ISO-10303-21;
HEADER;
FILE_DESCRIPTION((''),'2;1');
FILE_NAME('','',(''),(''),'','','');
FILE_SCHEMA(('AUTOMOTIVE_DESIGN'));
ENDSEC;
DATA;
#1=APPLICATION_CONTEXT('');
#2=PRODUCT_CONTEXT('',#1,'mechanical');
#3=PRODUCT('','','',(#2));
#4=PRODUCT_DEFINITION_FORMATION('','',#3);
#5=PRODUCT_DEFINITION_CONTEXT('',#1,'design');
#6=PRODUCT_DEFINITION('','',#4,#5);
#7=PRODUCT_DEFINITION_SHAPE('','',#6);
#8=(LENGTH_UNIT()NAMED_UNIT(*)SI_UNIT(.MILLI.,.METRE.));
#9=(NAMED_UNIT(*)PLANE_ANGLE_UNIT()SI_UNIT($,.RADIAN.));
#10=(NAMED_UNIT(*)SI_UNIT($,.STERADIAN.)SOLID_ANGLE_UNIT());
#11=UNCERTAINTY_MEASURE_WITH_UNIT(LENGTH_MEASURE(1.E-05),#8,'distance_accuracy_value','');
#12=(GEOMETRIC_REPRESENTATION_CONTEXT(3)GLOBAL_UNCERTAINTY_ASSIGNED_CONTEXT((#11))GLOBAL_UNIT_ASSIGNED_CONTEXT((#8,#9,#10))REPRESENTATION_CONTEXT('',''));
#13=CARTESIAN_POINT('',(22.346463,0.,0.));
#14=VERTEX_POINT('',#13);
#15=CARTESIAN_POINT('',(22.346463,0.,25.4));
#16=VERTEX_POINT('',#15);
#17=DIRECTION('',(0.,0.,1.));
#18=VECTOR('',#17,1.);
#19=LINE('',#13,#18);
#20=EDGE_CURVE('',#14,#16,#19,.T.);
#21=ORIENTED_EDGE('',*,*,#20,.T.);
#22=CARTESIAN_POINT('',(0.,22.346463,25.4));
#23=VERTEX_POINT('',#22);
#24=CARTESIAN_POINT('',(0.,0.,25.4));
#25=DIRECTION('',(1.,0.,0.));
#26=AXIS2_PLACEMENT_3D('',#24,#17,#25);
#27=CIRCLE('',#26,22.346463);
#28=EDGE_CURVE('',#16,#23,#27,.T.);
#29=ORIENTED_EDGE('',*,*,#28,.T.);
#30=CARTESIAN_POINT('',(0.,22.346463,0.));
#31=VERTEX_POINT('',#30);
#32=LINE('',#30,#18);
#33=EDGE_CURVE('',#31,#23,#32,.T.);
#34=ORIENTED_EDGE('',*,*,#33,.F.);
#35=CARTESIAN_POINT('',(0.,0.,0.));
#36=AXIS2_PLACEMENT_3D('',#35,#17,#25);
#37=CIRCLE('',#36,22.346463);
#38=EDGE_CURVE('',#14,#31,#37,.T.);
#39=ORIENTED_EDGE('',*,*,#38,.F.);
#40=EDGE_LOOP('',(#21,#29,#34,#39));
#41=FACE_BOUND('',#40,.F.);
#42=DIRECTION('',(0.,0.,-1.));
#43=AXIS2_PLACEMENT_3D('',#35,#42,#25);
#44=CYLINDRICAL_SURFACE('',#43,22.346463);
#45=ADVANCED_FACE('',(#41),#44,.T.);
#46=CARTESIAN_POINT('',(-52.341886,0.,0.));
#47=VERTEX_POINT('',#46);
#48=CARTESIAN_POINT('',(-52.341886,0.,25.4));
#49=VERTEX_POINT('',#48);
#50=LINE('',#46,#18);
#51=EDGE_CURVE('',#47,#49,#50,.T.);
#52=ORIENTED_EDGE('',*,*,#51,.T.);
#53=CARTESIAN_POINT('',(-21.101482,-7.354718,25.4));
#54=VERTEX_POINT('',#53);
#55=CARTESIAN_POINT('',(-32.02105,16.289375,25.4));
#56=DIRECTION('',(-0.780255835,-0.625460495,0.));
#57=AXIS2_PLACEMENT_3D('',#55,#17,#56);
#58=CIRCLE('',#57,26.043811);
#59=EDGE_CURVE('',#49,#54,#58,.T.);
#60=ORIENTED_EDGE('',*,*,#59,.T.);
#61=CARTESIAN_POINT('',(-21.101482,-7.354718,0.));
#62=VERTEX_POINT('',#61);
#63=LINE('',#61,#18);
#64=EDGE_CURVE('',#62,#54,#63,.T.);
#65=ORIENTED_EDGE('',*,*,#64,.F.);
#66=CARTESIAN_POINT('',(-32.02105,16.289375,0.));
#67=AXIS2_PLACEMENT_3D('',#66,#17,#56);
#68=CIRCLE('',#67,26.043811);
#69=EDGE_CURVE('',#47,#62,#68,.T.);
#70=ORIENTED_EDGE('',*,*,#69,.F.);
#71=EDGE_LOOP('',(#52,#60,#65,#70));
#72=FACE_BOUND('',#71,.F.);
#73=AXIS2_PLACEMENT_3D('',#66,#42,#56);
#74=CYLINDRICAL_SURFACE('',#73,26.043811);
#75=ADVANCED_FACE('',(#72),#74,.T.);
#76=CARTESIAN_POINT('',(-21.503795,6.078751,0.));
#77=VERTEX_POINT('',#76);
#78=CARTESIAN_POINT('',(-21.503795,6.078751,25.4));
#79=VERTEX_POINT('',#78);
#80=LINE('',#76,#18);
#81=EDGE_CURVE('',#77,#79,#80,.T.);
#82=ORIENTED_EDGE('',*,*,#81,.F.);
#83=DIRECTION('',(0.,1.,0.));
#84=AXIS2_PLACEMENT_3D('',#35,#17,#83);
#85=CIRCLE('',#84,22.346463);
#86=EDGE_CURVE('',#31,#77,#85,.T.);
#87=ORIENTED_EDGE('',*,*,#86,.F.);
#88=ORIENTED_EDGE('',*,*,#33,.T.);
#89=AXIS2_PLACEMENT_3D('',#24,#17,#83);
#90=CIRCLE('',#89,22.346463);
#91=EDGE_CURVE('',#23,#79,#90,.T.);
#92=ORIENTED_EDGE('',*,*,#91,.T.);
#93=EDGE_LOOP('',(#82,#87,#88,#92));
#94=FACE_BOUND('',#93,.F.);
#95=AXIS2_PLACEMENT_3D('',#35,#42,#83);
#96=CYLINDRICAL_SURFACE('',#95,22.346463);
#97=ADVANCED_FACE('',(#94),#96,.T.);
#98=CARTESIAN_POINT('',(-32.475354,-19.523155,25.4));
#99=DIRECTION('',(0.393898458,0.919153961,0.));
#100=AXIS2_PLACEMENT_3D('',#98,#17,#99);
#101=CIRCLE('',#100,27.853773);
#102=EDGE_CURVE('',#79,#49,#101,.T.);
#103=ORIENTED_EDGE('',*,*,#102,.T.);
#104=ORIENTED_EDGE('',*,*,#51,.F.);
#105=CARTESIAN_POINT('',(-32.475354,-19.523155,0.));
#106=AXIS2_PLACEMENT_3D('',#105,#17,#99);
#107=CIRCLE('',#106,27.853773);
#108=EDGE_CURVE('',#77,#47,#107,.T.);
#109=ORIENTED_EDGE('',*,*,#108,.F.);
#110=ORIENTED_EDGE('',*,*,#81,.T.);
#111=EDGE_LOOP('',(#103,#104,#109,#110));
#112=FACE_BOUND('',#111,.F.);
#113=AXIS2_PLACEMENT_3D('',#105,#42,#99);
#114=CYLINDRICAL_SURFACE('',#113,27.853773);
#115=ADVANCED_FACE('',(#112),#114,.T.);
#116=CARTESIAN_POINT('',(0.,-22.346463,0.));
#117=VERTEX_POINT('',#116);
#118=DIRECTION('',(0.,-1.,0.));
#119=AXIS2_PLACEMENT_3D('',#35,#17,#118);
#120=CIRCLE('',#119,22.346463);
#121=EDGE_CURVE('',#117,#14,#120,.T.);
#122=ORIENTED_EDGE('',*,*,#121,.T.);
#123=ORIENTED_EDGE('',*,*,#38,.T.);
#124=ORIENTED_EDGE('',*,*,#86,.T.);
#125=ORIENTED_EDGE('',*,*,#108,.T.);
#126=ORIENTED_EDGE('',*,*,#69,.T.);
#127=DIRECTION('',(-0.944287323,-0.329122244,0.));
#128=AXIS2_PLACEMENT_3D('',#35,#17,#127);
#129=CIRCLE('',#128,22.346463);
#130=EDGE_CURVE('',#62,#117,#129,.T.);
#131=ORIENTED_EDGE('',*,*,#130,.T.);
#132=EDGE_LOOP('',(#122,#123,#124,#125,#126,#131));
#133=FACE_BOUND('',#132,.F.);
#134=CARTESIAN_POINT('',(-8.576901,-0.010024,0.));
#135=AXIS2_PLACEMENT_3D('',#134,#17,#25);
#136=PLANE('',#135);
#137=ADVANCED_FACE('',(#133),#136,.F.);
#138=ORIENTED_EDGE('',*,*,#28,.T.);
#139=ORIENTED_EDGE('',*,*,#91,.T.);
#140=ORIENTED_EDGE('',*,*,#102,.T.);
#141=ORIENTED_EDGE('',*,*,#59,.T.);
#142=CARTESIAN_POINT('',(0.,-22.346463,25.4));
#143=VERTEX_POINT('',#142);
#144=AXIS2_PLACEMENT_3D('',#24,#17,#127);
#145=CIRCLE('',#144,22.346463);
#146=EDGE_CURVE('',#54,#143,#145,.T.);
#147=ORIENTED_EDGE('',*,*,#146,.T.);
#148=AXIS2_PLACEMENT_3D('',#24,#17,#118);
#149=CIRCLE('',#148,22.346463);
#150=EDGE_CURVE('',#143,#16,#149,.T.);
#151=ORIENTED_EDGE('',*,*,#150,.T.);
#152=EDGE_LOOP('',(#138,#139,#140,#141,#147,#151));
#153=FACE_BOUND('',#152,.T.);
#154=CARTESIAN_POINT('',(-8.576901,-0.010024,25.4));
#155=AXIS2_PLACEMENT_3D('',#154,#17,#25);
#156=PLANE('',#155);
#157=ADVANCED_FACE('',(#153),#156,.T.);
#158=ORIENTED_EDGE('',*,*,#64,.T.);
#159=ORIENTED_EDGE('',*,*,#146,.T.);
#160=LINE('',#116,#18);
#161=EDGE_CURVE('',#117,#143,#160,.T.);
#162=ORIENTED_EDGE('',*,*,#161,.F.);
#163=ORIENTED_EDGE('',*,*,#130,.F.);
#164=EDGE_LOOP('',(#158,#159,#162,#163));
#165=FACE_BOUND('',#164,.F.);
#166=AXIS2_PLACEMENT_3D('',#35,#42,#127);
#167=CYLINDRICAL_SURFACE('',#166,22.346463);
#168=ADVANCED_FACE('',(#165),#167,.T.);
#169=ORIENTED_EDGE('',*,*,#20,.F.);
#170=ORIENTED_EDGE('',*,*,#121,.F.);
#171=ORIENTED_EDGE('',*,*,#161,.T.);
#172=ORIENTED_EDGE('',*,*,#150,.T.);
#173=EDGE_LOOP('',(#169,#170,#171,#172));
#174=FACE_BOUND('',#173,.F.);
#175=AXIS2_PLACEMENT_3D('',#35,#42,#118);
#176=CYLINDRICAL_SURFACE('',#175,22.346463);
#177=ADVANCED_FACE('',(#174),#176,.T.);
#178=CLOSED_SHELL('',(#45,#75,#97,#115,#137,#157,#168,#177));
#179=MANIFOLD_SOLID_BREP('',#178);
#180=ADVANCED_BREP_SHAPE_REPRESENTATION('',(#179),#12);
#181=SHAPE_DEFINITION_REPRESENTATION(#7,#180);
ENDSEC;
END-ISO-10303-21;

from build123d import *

# Parameters (mm, degrees)
F2_DEPTH = 25.4


# Not quite as in the source:
# - the program builds the solid bodies; features that only make, move or delete a surface that nothing else refers to are left out


with BuildPart() as f2:
    # F0 (on Top) → F2 (new body)
    with BuildSketch(Plane.XY):
        with BuildLine():
            Line((0, -22.3464633732), (0, 0))
            Line((0, 0), (0, 22.3464633732))
            ThreePointArc((0, 22.3464633732), (-13.4819478567, 17.8213778165), (-21.5037952489, 6.0787511204))
            ThreePointArc((-21.5037952489, 6.0787511204), (-22.3364486511, -0.6689446499), (-21.1014820814, -7.354718163))
            ThreePointArc((-21.1014820814, -7.354718163), (-12.9424202767, -18.216975124), (0, -22.3464633732))
        make_face()
        with BuildLine():
            Line((0, 22.3464633732), (0, 0))
            Line((0, 0), (0, -22.3464633732))
            ThreePointArc((0, -22.3464633732), (15.8013357867, -15.8013357867), (22.3464633732, 0))
            ThreePointArc((22.3464633732, 0), (15.8013357867, 15.8013357867), (0, 22.3464633732))
        make_face()
        with BuildLine():
            ThreePointArc((-21.1014820814, -7.354718163), (-22.3364486511, -0.6689446499), (-21.5037952489, 6.0787511204))
            ThreePointArc((-21.5037952489, 6.0787511204), (-37.8621842038, 7.8047564636), (-52.3418858647, 0))
            ThreePointArc((-52.3418858647, 0), (-37.9892096461, -9.0613878034), (-21.1014820814, -7.354718163))
        make_face()
    extrude(amount=F2_DEPTH)


solid = f2.part
